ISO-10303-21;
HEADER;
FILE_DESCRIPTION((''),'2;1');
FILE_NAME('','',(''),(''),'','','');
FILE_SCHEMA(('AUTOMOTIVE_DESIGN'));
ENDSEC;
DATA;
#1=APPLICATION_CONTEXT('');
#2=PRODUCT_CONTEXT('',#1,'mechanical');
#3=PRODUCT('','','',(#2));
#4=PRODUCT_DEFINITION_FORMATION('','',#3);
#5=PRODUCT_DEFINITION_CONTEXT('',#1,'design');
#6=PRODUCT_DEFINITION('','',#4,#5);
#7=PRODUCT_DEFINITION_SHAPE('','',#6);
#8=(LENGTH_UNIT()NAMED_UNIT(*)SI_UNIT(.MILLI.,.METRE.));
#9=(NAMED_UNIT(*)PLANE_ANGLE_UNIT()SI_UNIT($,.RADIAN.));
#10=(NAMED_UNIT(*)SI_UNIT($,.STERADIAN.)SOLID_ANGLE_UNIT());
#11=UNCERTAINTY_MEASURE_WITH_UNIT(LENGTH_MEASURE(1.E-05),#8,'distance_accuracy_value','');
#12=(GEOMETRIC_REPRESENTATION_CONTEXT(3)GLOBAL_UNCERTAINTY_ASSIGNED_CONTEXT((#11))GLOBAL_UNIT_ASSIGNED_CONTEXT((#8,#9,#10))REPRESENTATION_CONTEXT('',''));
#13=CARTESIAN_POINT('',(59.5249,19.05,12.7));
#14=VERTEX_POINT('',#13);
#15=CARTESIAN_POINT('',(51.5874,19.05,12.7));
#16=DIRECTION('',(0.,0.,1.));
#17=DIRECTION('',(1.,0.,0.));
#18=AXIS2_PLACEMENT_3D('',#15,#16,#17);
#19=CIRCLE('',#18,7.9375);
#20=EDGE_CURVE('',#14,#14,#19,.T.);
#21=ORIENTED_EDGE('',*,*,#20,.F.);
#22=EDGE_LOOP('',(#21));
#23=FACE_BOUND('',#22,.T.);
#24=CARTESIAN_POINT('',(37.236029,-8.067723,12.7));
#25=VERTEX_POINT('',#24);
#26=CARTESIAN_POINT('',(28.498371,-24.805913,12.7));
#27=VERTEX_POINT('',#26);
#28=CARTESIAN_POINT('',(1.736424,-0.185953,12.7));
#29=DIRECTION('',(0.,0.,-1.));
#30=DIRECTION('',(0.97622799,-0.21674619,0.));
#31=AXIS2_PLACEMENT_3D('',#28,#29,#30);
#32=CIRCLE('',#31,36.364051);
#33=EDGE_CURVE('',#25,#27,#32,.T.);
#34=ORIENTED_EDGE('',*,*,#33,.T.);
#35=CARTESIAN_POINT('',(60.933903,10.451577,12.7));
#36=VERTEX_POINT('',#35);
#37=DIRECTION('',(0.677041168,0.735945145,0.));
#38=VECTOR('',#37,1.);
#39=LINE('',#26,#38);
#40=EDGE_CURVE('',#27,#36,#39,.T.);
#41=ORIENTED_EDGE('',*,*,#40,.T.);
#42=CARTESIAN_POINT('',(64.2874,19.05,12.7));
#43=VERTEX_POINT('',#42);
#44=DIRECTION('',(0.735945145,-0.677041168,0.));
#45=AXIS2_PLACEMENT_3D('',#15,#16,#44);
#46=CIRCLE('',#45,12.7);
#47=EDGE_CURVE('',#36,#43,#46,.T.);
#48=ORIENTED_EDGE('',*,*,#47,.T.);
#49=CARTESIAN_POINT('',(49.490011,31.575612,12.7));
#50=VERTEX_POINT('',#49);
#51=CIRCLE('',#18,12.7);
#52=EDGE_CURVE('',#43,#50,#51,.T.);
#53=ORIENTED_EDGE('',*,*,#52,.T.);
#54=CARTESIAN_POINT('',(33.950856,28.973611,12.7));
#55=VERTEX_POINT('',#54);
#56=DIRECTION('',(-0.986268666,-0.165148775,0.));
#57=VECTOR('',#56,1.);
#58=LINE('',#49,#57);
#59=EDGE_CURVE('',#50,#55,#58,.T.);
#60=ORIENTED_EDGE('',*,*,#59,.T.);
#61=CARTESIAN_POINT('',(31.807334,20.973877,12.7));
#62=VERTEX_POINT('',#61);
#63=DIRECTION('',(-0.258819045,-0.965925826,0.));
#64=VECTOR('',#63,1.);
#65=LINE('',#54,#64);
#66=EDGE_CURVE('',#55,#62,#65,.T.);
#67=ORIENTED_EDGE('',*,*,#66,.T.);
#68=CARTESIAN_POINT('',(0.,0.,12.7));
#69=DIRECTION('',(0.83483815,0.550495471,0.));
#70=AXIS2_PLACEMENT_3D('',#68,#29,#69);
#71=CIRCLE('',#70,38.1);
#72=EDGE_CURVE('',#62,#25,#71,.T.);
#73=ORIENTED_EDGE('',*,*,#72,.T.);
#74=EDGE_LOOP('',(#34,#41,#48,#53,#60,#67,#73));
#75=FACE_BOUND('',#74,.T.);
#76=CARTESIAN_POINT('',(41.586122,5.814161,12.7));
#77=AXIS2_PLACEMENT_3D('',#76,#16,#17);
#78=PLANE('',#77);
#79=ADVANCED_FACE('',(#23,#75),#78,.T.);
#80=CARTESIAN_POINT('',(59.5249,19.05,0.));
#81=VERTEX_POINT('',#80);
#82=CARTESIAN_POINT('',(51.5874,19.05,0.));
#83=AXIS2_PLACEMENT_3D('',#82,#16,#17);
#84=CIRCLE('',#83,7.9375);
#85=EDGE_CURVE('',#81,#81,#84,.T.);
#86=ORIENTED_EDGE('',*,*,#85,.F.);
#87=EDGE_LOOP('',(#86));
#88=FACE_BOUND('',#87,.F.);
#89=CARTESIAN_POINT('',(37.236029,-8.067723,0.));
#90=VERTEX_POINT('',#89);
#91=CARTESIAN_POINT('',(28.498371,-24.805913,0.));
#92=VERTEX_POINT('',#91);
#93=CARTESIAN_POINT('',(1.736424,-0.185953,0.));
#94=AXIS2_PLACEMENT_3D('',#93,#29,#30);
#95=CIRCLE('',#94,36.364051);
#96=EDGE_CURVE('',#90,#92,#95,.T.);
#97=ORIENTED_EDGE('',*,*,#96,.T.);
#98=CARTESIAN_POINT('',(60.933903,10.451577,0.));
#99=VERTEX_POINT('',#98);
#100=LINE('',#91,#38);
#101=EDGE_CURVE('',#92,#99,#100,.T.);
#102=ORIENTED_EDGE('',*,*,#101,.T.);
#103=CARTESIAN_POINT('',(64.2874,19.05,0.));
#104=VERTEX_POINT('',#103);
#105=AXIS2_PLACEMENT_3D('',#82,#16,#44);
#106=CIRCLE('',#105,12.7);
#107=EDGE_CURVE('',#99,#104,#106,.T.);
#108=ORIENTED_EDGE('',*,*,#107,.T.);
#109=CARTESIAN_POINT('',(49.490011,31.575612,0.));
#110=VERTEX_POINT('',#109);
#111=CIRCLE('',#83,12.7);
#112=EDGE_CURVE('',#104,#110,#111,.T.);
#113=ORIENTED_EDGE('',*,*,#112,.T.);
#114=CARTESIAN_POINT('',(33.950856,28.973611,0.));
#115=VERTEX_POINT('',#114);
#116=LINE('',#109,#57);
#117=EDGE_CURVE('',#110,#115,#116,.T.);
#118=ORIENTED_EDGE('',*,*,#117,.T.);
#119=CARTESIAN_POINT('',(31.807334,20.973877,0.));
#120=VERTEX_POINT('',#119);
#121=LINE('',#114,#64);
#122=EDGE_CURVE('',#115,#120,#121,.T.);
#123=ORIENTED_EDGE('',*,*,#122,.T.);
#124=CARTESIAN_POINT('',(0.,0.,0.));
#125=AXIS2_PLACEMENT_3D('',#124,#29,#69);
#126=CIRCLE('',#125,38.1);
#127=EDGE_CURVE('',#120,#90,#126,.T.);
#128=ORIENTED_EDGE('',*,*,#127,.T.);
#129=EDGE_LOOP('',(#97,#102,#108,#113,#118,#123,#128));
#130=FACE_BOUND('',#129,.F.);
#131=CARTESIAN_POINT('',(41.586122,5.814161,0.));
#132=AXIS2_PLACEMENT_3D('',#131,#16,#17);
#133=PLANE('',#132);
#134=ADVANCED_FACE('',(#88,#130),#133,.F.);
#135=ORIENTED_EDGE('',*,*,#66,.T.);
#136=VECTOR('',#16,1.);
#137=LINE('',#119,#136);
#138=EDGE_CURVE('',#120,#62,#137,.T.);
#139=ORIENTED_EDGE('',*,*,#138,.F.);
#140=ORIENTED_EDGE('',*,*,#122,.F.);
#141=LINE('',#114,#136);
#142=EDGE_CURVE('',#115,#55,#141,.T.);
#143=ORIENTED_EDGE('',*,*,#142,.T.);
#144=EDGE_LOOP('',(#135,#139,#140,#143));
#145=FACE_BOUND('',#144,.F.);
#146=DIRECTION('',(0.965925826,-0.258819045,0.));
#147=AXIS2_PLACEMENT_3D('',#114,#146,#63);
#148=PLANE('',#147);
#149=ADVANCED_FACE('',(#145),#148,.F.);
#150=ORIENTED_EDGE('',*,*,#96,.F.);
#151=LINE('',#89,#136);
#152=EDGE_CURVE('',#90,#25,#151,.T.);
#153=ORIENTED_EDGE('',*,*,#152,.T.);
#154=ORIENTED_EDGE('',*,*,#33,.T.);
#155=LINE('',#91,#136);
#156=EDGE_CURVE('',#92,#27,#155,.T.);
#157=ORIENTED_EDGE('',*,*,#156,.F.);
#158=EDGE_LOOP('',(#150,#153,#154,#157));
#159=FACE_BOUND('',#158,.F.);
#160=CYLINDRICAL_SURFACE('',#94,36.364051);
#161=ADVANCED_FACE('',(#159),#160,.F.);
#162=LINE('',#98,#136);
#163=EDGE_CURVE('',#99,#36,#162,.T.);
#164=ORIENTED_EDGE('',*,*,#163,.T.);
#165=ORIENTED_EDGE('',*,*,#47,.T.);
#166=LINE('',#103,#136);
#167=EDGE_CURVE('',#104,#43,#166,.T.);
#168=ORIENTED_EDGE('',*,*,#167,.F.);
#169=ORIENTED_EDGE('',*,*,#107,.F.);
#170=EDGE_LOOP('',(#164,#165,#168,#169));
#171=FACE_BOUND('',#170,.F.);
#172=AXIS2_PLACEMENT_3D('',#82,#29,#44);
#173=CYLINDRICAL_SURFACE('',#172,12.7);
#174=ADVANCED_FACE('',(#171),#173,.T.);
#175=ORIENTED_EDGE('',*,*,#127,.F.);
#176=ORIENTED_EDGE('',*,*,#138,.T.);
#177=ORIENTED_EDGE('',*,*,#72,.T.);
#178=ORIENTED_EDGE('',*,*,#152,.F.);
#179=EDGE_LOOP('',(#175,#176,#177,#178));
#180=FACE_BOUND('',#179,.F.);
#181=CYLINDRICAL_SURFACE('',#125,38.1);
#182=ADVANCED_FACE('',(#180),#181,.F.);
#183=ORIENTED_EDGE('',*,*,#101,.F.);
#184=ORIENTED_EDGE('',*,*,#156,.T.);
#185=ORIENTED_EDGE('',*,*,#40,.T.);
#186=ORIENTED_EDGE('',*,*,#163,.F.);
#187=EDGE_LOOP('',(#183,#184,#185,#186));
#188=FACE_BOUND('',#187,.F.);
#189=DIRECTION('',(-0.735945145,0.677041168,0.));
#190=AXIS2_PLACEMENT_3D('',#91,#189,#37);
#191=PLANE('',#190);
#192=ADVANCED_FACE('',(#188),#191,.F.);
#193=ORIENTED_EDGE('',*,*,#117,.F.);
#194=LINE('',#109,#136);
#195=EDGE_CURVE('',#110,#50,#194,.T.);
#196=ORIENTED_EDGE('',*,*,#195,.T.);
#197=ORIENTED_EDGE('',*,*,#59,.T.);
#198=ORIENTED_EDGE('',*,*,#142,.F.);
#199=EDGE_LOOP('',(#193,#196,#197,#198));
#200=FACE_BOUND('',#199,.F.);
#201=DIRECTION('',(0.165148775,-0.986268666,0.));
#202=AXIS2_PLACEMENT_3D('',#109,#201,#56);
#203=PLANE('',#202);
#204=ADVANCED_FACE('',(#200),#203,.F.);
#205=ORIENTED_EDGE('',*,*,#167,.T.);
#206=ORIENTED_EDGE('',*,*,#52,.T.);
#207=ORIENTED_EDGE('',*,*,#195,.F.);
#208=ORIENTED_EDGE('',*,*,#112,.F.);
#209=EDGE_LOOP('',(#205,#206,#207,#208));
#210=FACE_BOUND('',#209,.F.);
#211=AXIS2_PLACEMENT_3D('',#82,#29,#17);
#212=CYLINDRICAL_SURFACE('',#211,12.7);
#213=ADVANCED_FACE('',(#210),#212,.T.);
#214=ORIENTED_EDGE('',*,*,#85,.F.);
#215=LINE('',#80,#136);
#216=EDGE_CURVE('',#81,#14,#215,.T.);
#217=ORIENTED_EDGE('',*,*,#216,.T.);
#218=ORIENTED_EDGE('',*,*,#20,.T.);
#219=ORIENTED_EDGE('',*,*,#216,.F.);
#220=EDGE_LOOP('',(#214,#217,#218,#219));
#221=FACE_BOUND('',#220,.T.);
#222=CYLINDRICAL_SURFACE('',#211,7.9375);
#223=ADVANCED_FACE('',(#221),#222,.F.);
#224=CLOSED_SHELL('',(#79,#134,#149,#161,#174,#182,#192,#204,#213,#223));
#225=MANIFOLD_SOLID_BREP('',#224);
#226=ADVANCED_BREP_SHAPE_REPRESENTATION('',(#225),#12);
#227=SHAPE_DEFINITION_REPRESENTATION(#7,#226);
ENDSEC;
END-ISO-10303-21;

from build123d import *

# Parameters (mm, degrees)
F0_R     = 7.9375
F1_DEPTH = 12.7


with BuildPart() as f1:
    # F0 (on Top) → F1 (new body)
    with BuildSketch(Plane.XY):
        with BuildLine():
            ThreePointArc((31.8073335192, 20.9738774288), (37.4513031941, 7.0007063262), (37.2360288719, -8.0677229656))
            ThreePointArc((37.2360288719, -8.0677229656), (33.9725367984, -17.0138251575), (28.4983711579, -24.8059131627))
            Line((28.4983711579, -24.8059131627), (60.9339033423, 10.4515771637))
            ThreePointArc((60.9339033423, 10.4515771637), (40.4207699943, 13.0005062761), (49.4900105586, 31.5756120621))
            Line((49.4900105586, 31.5756120621), (33.9508555908, 28.9736107071))
            Line((33.9508555908, 28.9736107071), (31.8073335192, 20.9738774288))
        make_face()
        with BuildLine():
            ThreePointArc((49.4900105586, 31.5756120621), (40.4207699943, 13.0005062761), (60.9339033423, 10.4515771637))
            ThreePointArc((60.9339033423, 10.4515771637), (63.4193607937, 14.4353815135), (64.2874, 19.05))
            ThreePointArc((64.2874, 19.05), (59.79267739, 28.7434732141), (49.4900105586, 31.5756120621))
        make_face()
        with Locations((51.5874, 19.05)):
            Circle(F0_R, mode=Mode.SUBTRACT)
    extrude(amount=F1_DEPTH)


solid = f1.part
